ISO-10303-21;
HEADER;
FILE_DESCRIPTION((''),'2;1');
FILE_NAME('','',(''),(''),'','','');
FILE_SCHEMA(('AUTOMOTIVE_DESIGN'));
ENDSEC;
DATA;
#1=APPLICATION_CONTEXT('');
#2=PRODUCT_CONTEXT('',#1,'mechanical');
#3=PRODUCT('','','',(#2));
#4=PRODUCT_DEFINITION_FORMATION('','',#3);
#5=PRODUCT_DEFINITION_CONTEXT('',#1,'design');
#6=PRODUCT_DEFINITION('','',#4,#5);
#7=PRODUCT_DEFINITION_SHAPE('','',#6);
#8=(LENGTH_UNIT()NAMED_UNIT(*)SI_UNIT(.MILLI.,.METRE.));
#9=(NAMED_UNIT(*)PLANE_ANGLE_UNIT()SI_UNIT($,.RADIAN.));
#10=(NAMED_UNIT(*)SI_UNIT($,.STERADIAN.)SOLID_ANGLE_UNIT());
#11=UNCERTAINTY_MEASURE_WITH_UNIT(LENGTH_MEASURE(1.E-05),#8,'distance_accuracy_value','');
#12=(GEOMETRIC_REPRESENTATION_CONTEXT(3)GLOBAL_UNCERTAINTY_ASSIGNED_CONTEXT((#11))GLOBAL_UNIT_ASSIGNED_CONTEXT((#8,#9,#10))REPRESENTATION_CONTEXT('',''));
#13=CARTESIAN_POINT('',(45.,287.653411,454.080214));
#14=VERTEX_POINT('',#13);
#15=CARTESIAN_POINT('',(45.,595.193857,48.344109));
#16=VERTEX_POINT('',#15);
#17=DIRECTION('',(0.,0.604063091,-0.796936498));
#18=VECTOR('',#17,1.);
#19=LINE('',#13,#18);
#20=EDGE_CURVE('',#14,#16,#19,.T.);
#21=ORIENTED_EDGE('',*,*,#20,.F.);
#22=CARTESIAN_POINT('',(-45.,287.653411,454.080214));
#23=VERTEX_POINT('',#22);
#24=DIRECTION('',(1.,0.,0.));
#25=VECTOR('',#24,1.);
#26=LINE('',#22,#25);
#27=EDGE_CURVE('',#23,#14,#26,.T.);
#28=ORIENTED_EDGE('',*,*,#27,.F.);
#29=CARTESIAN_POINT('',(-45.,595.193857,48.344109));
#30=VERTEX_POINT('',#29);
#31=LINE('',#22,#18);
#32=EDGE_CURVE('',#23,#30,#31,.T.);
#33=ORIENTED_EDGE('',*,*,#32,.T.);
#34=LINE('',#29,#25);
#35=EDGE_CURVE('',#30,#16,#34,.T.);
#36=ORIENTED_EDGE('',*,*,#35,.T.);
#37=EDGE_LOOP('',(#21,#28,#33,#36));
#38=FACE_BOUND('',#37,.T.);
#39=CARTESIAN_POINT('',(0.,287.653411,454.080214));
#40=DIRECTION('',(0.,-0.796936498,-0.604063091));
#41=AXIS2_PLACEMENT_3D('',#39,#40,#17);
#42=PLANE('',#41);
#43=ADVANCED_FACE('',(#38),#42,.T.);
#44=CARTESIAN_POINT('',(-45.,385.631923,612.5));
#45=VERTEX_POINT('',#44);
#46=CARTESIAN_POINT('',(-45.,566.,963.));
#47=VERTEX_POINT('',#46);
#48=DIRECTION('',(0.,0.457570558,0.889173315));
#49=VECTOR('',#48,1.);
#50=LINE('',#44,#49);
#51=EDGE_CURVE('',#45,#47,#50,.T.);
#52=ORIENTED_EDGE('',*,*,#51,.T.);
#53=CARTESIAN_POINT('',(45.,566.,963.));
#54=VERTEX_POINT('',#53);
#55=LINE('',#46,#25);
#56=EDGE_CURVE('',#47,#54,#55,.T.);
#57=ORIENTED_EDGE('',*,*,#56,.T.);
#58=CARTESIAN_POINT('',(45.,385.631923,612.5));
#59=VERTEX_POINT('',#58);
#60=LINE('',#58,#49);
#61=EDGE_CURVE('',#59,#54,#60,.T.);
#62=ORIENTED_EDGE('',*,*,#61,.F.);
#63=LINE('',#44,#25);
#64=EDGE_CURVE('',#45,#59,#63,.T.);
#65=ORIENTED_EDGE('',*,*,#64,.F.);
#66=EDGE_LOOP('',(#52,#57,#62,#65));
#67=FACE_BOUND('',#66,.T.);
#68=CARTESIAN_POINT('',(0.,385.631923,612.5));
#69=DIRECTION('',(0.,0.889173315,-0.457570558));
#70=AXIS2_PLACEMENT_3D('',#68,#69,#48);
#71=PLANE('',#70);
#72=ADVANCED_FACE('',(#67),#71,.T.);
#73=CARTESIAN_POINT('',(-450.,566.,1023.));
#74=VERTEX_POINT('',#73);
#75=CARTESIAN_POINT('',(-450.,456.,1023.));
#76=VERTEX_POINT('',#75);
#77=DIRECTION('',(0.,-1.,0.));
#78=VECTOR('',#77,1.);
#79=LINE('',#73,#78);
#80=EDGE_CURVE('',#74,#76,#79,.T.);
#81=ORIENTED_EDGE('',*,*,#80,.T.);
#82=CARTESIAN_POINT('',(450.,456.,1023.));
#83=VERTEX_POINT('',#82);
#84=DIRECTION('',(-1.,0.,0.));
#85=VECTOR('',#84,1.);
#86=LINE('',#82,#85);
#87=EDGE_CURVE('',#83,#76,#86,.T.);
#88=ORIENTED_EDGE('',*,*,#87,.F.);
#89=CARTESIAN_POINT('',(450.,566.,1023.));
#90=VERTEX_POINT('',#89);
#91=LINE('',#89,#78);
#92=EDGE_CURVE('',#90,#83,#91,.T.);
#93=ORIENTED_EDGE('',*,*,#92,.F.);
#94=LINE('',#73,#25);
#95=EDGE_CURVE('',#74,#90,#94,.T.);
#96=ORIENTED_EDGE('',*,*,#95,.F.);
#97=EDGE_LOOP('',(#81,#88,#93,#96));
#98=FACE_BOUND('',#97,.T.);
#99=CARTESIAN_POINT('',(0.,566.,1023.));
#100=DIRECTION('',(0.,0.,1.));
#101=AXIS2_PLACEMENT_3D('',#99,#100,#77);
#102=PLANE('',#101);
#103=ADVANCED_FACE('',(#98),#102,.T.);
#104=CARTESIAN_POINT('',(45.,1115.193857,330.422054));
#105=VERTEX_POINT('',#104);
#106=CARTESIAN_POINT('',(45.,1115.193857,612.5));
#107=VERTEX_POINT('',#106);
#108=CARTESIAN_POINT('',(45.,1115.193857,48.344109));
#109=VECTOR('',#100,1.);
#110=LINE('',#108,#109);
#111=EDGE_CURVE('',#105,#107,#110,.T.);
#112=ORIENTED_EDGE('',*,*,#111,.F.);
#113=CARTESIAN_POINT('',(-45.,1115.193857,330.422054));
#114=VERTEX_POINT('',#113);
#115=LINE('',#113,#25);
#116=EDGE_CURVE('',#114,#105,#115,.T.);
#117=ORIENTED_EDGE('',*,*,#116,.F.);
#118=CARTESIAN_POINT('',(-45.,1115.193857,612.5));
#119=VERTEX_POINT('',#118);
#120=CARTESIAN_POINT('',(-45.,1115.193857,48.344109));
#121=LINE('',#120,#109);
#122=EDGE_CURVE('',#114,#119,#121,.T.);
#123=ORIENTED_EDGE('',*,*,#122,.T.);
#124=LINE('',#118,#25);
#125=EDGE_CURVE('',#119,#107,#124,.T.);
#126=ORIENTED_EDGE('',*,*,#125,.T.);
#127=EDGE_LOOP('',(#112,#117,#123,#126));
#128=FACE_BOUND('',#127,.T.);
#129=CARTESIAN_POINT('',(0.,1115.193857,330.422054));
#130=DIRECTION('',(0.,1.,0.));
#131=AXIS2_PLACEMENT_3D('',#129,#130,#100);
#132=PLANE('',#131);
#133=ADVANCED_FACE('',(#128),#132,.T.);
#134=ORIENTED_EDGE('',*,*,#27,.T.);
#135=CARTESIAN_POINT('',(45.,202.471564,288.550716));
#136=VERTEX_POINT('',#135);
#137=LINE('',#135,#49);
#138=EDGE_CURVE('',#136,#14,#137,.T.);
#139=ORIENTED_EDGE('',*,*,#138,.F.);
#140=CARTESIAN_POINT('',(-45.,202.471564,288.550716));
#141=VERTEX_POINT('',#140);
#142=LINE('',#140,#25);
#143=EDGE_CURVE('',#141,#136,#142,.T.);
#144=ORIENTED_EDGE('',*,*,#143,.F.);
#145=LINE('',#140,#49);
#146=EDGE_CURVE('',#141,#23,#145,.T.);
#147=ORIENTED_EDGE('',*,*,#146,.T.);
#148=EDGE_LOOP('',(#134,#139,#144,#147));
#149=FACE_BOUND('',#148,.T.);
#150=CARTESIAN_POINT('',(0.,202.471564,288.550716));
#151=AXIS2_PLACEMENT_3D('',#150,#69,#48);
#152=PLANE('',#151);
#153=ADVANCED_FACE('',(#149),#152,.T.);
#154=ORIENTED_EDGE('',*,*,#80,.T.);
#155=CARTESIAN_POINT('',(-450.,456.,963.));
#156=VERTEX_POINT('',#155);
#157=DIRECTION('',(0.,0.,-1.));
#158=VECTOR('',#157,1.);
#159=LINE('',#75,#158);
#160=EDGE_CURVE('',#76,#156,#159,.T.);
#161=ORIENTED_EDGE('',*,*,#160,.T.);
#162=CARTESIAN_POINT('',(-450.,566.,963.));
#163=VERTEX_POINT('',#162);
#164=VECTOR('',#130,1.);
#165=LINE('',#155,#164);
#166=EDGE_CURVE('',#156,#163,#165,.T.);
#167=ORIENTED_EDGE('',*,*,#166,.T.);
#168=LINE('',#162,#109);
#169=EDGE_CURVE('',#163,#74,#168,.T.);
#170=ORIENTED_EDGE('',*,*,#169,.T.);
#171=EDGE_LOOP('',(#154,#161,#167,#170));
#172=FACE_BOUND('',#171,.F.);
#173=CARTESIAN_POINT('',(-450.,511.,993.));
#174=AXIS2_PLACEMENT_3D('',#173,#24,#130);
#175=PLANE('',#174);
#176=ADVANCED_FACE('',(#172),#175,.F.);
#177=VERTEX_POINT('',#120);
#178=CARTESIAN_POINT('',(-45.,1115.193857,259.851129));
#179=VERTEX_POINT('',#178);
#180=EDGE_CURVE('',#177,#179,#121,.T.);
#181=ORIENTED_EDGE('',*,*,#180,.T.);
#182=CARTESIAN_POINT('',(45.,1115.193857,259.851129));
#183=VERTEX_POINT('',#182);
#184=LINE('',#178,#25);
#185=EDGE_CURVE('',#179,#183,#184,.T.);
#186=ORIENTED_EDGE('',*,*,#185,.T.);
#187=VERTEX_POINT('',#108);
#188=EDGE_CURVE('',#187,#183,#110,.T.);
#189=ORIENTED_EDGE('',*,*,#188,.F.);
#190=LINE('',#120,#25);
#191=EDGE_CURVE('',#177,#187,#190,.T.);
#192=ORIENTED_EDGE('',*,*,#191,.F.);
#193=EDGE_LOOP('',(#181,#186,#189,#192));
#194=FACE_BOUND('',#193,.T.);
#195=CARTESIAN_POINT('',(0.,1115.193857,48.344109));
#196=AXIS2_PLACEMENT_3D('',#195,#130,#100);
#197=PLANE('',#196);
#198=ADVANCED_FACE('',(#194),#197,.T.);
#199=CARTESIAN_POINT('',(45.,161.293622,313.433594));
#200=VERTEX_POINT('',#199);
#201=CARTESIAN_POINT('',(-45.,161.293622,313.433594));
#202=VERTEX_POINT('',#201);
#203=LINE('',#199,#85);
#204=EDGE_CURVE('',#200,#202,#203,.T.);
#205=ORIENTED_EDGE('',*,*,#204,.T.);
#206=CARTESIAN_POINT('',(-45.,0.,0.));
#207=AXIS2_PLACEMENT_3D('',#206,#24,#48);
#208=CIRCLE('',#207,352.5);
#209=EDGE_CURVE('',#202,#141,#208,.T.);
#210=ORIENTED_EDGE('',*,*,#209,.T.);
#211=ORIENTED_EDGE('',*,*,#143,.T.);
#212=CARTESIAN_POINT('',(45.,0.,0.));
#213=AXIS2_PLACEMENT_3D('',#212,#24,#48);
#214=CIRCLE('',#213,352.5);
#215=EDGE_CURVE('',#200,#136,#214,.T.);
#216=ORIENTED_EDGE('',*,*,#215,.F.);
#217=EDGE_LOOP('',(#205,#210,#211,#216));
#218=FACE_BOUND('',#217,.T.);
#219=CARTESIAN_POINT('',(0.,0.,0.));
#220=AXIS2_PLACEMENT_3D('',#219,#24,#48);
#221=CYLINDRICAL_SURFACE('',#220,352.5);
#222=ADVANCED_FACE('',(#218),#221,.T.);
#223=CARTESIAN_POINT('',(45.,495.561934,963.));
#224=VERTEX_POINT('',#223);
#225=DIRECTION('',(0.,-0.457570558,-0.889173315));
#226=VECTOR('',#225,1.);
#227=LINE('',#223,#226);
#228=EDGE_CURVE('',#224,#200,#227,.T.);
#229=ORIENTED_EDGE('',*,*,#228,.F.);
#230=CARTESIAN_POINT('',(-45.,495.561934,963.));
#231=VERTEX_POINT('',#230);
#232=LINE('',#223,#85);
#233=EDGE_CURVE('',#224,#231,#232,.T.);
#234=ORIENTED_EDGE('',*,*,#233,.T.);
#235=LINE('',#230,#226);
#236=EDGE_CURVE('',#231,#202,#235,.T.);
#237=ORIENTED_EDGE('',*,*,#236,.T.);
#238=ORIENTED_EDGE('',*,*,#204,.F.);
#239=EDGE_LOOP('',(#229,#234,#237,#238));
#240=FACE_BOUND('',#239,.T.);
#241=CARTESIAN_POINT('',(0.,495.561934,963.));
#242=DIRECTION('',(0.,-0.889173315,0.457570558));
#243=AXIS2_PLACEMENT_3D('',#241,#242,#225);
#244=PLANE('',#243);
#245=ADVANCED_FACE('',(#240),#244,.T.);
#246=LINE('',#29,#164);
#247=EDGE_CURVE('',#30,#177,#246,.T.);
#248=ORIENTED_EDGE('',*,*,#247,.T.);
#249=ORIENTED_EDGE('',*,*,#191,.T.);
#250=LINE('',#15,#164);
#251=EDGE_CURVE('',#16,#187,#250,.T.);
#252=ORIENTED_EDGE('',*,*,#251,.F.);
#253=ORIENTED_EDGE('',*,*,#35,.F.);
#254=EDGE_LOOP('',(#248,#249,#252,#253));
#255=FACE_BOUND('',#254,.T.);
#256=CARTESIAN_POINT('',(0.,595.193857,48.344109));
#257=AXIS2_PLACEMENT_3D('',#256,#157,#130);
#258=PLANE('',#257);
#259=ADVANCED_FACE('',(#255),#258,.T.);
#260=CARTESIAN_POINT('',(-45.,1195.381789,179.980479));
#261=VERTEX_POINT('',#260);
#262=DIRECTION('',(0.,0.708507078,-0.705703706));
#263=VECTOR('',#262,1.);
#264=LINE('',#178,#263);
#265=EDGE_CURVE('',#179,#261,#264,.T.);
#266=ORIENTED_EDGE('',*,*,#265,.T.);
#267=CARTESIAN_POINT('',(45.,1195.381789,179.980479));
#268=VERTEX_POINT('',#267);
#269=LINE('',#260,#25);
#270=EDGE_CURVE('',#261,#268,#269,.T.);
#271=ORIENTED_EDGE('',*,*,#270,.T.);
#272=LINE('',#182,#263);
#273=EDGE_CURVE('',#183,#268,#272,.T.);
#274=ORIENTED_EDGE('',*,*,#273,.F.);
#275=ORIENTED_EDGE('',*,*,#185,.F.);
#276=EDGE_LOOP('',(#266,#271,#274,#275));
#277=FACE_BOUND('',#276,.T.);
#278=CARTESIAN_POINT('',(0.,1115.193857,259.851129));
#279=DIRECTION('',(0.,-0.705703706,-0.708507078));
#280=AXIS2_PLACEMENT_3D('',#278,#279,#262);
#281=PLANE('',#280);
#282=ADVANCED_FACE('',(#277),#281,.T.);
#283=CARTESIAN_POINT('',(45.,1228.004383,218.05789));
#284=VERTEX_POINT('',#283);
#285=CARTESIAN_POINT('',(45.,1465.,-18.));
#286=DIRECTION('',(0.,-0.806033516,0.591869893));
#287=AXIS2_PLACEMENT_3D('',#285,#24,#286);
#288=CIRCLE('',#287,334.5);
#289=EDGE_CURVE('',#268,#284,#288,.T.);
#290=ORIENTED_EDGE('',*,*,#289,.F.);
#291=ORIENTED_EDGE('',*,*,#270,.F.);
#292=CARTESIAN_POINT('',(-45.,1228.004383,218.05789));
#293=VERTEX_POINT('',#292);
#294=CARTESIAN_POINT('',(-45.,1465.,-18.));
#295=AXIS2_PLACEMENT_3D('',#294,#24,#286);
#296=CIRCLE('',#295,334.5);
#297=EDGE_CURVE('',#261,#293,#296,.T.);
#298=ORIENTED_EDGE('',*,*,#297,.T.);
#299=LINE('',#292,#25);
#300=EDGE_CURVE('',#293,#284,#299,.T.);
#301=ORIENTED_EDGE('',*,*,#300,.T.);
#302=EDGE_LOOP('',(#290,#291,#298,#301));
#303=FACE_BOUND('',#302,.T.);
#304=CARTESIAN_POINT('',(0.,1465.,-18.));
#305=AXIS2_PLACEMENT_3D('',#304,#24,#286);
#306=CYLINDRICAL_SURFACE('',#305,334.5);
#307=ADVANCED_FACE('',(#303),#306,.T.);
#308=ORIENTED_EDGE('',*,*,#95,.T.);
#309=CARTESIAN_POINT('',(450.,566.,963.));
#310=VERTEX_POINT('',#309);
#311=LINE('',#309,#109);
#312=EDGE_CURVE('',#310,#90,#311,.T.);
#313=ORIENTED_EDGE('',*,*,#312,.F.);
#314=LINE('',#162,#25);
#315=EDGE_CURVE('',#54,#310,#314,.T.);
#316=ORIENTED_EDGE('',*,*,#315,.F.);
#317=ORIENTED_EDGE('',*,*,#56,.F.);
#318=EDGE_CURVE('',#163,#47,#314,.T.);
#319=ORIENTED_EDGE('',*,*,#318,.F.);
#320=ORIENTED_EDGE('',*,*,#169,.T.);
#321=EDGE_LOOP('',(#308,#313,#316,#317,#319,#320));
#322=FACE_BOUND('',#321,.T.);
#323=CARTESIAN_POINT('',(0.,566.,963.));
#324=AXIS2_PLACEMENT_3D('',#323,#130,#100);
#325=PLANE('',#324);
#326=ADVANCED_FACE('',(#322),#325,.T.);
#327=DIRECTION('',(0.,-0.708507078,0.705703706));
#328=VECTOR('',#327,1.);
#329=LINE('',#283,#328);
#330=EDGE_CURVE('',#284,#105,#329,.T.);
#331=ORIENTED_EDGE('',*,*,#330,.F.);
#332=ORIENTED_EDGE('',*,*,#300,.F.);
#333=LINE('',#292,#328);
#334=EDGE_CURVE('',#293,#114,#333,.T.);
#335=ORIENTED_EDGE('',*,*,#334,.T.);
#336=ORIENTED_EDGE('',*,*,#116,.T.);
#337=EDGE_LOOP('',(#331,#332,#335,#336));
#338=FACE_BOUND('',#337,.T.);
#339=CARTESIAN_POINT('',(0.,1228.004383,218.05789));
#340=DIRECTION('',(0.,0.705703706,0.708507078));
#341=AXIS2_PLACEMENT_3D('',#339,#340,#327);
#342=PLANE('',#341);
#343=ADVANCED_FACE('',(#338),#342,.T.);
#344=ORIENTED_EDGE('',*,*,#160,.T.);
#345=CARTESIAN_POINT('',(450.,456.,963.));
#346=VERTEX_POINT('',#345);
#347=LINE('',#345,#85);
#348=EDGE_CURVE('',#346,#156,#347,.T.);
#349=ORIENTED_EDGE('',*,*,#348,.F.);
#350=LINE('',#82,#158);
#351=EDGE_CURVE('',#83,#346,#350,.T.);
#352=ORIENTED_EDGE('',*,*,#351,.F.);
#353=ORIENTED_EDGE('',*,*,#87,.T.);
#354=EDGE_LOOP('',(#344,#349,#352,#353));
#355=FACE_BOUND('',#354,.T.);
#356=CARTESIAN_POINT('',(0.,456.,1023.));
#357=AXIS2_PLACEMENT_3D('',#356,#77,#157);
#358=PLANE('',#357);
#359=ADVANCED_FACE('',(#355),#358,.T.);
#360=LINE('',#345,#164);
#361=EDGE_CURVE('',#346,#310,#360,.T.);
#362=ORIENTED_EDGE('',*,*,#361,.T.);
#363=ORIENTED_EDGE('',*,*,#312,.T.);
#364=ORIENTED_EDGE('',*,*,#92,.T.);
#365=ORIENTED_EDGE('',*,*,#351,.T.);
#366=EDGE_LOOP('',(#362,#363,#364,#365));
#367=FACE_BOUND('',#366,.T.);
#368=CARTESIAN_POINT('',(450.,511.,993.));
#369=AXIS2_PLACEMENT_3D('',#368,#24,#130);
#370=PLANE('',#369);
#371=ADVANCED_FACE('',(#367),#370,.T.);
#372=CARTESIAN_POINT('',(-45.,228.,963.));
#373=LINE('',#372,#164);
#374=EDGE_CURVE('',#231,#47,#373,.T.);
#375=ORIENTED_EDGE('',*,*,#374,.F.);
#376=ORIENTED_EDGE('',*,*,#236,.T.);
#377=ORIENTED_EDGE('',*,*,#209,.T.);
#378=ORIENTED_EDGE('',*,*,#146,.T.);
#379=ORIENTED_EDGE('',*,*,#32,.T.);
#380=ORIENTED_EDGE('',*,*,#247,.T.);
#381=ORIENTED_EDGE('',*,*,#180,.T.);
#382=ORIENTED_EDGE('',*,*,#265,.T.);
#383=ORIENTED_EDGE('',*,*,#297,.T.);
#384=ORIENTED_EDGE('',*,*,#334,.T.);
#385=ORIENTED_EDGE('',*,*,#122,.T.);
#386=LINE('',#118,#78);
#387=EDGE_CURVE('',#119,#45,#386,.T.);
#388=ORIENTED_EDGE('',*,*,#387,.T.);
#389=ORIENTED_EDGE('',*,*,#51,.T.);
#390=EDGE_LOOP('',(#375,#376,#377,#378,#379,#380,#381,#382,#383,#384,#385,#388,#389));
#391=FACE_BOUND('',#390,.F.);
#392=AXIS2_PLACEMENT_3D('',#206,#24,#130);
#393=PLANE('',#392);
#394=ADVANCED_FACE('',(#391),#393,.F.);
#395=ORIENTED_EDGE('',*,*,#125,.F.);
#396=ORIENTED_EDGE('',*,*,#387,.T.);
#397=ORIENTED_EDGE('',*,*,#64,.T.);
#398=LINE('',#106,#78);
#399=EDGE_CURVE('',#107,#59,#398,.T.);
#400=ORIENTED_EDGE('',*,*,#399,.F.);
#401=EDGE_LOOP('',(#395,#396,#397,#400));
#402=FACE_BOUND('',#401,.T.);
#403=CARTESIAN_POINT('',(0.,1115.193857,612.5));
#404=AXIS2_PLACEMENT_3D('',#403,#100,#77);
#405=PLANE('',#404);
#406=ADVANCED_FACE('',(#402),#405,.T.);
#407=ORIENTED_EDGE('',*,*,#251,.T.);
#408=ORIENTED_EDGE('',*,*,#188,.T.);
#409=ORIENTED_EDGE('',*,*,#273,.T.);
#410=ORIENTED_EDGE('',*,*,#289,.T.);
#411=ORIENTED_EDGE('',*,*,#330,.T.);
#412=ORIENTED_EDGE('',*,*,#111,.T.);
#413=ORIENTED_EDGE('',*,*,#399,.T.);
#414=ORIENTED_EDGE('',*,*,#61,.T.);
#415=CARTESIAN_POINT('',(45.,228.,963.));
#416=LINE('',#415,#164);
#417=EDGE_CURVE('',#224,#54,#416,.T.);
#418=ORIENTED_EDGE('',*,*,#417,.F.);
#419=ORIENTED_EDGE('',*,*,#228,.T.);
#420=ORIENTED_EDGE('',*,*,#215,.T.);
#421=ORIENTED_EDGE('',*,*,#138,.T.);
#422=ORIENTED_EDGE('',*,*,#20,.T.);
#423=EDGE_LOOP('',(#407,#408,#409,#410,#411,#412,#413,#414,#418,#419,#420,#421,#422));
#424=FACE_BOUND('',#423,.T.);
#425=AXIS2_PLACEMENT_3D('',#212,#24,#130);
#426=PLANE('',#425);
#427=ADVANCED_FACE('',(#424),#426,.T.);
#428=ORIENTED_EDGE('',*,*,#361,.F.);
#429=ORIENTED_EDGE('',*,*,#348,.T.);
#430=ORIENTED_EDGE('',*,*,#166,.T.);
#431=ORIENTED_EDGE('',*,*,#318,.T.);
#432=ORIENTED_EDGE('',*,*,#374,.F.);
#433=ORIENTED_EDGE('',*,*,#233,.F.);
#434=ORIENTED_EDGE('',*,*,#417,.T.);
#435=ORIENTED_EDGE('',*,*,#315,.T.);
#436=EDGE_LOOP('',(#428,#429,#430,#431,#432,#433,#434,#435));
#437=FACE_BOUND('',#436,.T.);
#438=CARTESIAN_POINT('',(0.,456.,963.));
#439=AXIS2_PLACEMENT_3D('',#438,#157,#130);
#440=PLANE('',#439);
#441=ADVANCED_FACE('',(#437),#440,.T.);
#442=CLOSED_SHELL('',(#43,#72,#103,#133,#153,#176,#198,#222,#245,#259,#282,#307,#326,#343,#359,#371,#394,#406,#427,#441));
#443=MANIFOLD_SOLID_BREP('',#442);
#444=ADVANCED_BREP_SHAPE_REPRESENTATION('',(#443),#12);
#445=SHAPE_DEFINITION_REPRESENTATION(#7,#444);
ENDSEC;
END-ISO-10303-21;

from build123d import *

# Parameters (mm, degrees)
F1_DEPTH = 45
F2_DEPTH = 450


# Not quite as in the source:
# - a feature names something its author has since deleted; it is built from what else it names


with BuildPart() as f1:
    # F0 (on Right) → F1 (new body, symmetric)
    with BuildSketch(Plane.YZ):
        with BuildLine():
            ThreePointArc((161.2936216865, 313.43359361), (-300.9254489442, -183.5759357262), (352.5, 0))
            ThreePointArc((352.5, 0), (312.7518796274, 162.6115364588), (202.4715643149, 288.5507158956))
            ThreePointArc((202.4715643149, 288.5507158956), (182.3076165098, 301.6955136599), (161.2936216865, 313.43359361))
        make_face()
        with BuildLine():
            ThreePointArc((161.2936216865, 313.43359361), (182.3076165098, 301.6955136599), (202.4715643149, 288.5507158956))
            Line((202.4715643149, 288.5507158956), (287.6534110047, 454.0802144534))
            Line((287.6534110047, 454.0802144534), (255.5, 496.5))
            Line((255.5, 496.5), (161.2936216865, 313.43359361))
        make_face()
        Polygon((255.5, 496.5), (287.6534110047, 454.0802144534), (595.193856999, 48.3441087551), (1115.193856999, 48.3441087551), (1115.193856999, 259.8511291536), (1115.193856999, 330.4220543775), (1115.193856999, 612.5), (385.6319234642, 612.5), (315.193856999, 612.5), align=None)
        Polygon((495.5619335347, 963), (315.193856999, 612.5), (385.6319234642, 612.5), (566, 963), align=None)
        Polygon((456, 963), (495.5619335347, 963), (566, 963), (566, 1023), (456, 1023), align=None)
        with BuildLine():
            Line((1115.193856999, 330.4220543775), (1115.193856999, 259.8511291536))
            Line((1115.193856999, 259.8511291536), (1195.3817888304, 179.9804793552))
            ThreePointArc((1195.3817888304, 179.9804793552), (1210.9786128275, 199.6313048689), (1228.0043825139, 218.0578897059))
            Line((1228.0043825139, 218.0578897059), (1115.193856999, 330.4220543775))
        make_face()
        with BuildLine():
            ThreePointArc((1228.0043825139, 218.0578897059), (1210.9786128275, 199.6313048689), (1195.3817888304, 179.9804793552))
            ThreePointArc((1195.3817888304, 179.9804793552), (1360.8295666617, -335.8659636043), (1799.5, -18))
            ThreePointArc((1799.5, -18), (1592.7012450035, 291.1644255482), (1228.0043825139, 218.0578897059))
        make_face()
    extrude(amount=F1_DEPTH, both=True)

    # F0 (on Right) → F2 (join, symmetric)
    with BuildSketch(Plane.YZ):
        Polygon((456, 963), (495.5619335347, 963), (566, 963), (566, 1023), (456, 1023), align=None)
    extrude(amount=F2_DEPTH, both=True)


solid = f1.part
